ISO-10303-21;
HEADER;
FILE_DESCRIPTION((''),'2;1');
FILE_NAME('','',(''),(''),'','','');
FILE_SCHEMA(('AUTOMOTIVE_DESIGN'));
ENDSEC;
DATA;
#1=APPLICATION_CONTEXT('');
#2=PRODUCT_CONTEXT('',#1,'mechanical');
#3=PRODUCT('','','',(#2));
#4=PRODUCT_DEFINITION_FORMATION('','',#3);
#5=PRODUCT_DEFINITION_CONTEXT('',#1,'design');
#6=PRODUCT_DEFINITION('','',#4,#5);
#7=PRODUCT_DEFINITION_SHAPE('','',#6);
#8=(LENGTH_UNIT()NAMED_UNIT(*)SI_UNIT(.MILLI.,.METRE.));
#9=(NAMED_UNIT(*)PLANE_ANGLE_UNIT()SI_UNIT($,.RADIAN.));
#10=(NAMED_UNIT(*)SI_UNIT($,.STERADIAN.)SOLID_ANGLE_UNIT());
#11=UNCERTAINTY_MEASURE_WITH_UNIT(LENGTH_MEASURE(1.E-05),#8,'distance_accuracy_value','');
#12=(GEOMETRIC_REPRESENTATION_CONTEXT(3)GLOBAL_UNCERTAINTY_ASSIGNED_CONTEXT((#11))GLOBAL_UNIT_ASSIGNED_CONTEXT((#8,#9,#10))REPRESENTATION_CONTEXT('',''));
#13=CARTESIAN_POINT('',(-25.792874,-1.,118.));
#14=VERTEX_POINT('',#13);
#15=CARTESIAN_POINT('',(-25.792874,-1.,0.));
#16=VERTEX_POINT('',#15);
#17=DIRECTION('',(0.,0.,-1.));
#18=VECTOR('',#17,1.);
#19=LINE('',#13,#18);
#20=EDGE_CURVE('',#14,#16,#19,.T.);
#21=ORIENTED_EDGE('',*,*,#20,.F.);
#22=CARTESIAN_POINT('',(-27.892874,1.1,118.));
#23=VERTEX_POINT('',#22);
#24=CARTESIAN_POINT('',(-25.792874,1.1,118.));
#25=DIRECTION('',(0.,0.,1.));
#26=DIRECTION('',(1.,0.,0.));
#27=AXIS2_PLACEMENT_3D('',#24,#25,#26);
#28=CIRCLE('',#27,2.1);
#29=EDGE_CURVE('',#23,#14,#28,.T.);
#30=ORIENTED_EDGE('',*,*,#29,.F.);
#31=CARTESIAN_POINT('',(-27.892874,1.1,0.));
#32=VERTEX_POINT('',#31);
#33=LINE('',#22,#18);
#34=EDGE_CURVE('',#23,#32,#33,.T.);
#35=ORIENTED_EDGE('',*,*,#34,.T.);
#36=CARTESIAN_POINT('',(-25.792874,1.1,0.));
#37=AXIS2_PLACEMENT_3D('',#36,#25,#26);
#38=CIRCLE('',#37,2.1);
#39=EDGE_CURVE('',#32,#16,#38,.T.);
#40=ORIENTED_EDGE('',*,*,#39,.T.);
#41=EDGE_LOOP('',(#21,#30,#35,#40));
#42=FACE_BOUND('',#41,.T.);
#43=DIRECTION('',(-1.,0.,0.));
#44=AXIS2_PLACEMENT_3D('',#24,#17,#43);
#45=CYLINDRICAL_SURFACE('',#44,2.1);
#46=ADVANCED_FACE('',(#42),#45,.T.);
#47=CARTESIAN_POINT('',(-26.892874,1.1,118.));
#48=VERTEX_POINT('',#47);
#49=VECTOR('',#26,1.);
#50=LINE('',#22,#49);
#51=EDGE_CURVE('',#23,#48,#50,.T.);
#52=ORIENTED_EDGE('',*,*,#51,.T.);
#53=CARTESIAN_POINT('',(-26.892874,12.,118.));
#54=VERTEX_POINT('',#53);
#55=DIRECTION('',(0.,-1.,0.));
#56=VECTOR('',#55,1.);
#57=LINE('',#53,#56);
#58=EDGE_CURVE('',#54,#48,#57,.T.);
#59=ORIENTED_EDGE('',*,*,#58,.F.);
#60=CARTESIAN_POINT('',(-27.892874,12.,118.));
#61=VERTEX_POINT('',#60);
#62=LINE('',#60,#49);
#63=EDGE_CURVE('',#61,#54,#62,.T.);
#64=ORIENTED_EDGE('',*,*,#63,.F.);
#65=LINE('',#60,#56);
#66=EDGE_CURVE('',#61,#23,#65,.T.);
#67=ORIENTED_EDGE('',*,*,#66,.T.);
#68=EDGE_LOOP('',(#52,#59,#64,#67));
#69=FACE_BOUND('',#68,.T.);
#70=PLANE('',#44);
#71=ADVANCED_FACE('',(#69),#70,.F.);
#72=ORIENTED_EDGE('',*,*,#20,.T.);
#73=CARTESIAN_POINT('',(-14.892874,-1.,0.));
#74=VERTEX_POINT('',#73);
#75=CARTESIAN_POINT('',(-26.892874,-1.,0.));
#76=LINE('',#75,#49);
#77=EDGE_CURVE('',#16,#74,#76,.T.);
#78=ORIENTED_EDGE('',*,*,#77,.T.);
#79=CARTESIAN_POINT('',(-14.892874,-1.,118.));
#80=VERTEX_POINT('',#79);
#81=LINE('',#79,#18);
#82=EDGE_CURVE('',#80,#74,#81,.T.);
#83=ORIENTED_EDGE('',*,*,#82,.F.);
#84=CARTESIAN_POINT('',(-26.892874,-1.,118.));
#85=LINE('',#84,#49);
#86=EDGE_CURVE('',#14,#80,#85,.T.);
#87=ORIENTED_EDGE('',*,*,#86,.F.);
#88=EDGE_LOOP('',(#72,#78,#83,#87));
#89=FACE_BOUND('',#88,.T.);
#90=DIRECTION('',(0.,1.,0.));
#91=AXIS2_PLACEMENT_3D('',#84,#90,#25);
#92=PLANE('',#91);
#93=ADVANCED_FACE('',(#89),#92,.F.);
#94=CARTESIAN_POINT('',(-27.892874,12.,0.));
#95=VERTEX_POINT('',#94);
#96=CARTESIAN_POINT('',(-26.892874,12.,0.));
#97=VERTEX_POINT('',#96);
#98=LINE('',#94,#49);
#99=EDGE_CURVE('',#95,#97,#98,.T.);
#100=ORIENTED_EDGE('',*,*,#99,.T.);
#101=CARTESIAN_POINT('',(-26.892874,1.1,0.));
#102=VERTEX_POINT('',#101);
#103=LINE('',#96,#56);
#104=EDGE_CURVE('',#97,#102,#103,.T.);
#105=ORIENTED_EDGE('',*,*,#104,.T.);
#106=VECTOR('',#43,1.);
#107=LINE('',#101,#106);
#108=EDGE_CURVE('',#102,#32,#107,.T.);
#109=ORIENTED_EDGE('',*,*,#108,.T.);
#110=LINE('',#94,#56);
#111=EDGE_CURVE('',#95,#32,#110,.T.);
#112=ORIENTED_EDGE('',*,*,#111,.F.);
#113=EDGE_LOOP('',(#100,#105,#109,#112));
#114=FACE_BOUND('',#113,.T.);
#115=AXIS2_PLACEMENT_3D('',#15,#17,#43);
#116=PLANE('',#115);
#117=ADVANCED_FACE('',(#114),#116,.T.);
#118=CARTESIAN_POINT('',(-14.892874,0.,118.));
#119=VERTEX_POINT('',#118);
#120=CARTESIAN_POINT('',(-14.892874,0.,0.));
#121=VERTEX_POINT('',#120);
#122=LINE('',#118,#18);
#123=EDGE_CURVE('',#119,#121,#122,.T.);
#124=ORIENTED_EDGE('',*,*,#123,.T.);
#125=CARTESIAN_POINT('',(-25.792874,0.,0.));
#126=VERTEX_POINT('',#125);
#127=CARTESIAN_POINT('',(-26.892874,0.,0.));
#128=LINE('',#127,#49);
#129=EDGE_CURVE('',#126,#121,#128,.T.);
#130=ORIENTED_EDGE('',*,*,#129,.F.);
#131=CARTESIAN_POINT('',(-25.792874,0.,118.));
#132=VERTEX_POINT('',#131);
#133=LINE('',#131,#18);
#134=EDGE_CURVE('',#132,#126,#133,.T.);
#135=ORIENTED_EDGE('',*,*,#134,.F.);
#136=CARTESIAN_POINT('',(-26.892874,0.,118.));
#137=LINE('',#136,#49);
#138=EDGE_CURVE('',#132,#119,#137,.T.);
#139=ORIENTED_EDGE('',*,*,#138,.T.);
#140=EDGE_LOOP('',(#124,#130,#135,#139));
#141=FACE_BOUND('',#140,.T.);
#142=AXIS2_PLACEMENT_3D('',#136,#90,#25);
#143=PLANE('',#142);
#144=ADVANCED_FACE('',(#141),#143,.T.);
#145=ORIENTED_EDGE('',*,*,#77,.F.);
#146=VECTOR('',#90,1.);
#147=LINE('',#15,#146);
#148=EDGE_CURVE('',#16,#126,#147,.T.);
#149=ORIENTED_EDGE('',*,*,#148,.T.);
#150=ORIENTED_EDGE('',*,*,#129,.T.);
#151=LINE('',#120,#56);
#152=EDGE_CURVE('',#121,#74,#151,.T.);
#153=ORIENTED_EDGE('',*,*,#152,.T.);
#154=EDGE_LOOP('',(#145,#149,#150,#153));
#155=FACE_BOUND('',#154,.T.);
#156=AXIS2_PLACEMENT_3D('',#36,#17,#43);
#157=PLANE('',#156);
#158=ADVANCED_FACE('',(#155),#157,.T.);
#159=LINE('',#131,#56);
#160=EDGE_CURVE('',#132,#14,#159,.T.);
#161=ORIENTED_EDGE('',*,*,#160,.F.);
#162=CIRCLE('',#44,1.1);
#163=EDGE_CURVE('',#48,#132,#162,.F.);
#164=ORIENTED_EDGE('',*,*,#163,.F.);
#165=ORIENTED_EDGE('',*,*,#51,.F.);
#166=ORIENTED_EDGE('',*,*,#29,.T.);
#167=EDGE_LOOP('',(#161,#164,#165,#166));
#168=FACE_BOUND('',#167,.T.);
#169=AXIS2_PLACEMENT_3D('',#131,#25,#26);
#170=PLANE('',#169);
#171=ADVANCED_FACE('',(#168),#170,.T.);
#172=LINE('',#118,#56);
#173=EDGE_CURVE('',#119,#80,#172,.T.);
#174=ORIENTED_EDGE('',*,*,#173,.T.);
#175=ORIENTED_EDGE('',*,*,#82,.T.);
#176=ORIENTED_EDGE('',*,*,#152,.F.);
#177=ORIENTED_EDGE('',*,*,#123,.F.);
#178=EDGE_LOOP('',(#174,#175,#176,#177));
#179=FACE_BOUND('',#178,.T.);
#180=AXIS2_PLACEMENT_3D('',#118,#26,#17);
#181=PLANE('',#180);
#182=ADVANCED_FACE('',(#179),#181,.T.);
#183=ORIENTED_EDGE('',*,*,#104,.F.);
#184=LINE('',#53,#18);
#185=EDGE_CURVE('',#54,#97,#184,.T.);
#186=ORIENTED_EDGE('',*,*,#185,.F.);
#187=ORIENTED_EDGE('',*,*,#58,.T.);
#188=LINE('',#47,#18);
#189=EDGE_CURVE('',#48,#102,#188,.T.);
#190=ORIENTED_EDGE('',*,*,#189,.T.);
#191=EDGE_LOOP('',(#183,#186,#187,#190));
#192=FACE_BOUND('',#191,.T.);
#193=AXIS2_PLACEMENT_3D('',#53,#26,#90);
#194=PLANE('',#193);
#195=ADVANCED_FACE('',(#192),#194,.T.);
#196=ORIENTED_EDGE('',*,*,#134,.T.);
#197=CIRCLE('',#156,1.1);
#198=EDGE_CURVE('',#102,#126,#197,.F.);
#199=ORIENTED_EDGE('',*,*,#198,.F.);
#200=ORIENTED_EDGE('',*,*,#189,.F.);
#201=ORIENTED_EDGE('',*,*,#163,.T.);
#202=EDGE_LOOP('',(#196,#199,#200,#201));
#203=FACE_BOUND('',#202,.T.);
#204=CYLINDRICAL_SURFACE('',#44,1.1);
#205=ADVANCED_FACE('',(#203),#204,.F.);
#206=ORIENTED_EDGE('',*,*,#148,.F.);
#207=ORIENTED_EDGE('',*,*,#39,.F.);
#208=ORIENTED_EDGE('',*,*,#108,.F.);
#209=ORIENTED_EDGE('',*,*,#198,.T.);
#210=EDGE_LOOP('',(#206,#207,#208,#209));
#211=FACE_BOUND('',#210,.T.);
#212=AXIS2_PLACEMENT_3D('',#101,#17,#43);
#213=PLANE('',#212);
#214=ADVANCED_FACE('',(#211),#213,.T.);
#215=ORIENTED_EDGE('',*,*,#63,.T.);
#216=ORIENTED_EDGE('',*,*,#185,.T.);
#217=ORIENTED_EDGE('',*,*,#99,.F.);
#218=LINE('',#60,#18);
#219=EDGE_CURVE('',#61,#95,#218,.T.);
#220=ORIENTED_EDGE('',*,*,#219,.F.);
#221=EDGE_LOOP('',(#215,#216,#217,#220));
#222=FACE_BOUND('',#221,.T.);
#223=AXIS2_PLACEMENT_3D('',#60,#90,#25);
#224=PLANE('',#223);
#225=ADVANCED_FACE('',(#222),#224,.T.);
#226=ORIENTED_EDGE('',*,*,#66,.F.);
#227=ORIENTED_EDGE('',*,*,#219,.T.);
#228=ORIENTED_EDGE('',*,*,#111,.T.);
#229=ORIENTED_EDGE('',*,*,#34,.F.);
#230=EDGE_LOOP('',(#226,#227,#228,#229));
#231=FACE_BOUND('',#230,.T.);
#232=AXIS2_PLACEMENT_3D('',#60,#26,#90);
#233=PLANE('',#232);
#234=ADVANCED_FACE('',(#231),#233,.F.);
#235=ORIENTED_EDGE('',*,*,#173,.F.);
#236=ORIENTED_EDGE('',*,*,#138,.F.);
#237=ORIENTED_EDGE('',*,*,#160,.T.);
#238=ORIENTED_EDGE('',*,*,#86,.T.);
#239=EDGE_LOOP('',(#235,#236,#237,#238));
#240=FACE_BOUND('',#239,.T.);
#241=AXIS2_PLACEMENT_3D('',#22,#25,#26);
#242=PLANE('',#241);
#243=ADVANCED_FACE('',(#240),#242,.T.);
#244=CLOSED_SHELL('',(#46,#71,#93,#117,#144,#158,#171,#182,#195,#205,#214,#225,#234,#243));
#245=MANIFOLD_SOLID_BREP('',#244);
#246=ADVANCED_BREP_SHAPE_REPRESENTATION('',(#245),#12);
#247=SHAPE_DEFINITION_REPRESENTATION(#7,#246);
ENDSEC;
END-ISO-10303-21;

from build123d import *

# Parameters (mm, degrees)
SM_BASE_FLANGE_1_DEPTH = 118


# Sheet-metal steps are written as plain solids
with BuildPart() as part:
    # Sketch 1 → Базовая кромка1 (new body)
    with BuildSketch(Plane.XY):
        with BuildLine():
            Line((-26.892874013, 12), (-26.892874013, 1.1))
            ThreePointArc((-26.892874013, 1.1), (-26.570691472, 0.322182541), (-25.792874013, 0))
            Line((-25.792874013, 0), (-14.892874013, 0))
            Line((-14.892874013, 0), (-14.892874013, -1))
            Line((-14.892874013, -1), (-25.792874013, -1))
            ThreePointArc((-25.792874013, -1), (-27.277798253, -0.38492424), (-27.892874013, 1.1))
            Line((-27.892874013, 1.1), (-27.892874013, 12))
            Line((-27.892874013, 12), (-26.892874013, 12))
        make_face()
    extrude(amount=SM_BASE_FLANGE_1_DEPTH)


solid = part.part
